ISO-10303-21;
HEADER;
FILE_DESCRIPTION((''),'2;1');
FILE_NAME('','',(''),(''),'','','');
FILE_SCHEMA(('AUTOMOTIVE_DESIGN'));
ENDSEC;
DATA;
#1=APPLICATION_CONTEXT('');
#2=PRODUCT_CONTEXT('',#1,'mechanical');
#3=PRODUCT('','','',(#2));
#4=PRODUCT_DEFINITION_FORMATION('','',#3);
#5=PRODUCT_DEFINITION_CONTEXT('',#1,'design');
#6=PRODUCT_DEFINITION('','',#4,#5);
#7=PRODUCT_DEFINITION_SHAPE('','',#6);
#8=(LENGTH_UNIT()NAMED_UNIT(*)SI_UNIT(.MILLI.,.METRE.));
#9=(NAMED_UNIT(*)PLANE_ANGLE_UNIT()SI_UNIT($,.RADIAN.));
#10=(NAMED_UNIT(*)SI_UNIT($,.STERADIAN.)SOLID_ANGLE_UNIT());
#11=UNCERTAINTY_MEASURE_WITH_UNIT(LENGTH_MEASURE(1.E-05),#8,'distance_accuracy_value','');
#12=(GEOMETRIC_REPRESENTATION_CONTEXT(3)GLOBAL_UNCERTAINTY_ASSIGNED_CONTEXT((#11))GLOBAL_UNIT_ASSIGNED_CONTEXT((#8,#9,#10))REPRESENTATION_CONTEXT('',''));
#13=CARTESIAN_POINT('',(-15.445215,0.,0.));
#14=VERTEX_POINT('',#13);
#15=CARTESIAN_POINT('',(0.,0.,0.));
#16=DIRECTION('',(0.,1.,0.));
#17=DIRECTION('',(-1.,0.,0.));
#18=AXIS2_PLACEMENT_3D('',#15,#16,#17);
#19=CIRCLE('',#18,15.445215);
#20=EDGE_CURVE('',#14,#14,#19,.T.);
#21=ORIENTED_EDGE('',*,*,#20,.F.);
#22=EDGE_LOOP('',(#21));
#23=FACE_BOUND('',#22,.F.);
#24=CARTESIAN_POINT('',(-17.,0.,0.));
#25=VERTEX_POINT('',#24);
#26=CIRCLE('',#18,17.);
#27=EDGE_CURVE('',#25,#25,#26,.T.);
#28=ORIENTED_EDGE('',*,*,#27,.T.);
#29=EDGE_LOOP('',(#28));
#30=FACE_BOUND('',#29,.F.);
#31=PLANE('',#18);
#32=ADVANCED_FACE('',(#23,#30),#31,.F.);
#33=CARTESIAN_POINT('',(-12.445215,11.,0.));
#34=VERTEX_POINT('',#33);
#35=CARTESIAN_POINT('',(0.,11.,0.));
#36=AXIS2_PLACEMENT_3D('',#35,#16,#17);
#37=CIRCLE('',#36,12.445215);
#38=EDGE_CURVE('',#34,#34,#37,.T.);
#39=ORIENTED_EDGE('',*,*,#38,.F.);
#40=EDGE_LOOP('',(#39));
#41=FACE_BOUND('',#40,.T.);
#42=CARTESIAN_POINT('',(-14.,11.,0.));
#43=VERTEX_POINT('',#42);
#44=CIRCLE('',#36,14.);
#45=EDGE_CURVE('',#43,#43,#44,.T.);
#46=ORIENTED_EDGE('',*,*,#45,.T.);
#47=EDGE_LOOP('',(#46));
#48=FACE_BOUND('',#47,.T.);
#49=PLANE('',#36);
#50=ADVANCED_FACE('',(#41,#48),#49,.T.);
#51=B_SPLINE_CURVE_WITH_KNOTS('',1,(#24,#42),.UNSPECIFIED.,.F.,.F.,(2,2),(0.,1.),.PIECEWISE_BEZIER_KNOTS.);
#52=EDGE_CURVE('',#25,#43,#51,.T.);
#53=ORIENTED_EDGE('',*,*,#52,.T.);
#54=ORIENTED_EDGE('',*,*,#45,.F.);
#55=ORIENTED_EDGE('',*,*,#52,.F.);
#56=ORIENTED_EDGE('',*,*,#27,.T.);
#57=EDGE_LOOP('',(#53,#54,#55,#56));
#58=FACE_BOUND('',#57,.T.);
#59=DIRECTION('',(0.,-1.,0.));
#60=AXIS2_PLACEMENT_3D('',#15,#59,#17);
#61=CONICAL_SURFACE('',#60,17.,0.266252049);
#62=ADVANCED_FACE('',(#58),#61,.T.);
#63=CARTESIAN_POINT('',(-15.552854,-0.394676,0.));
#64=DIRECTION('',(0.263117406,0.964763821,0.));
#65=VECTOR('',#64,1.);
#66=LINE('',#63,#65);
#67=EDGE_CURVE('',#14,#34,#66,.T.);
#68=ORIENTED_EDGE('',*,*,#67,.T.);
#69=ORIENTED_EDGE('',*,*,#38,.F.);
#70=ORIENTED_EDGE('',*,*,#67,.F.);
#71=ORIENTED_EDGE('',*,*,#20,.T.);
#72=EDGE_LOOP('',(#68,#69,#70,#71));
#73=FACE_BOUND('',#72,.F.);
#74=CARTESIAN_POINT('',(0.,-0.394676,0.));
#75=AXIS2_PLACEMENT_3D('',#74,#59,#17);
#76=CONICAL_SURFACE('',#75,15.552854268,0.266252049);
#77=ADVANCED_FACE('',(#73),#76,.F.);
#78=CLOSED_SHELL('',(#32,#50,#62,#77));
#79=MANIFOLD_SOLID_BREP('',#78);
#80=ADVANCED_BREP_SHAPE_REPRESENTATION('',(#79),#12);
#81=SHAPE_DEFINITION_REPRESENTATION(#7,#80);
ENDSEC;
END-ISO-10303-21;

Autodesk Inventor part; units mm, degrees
ref_plane "YZ Plane" through (0, 0, 0) normal (1, 0, 0) x (0, 1, 0)
ref_plane "XY Plane" through (0, 0, 0) normal (0, 0, 1) x (1, 0, 0)
sketch "Szkic6" plane through (0, 0, 0) normal (0, 1, 0) x (-1, 0, 0)
  circle A0 centre (0, 0) radius 17
  dimension "d33" = 34
ref_plane "Płaszczyzna konstrukcyjna1" through (0, 11, 0) normal (0, 1, 0) x (-1, 0, 0)
sketch "Szkic7" plane through (0, 11, 0) normal (0, 1, 0) x (-1, 0, 0)
  circle A0 centre (0, 0) radius 14
  dimension "d35" = 28
loft "Wyciągnięcie złożone1" add profiles "Szkic6", "Szkic7"
shell "Skorupa1" thickness 1.5 removed faces 2 at (-0.5625, 11, 1.5565) at (6.0401, 0, -5.7878)
equation "\"d33\" = OD1"
equation "\"d35\" = OD2"
equation "\"d52\" = THK"
equation "\"SzerokośćGięciaPodcięcia\" = Grubość"
equation "\"RozmiarPodcięciaNarożnika\" = 4 * Grubość"
equation "\"PromieńPrzejścia\" = PromieńGięcia"
equation "\"Rozmiar_promienia_Jacobiego\" = PromieńGięcia"
equation "\"Wielk_odstępu\" = Grubość"
equation "\"d2\" = PromieńGięcia"
equation "\"d23\" = PromieńGięcia"
equation "\"OD1\" = 34"
equation "\"OD2\" = 28"
equation "\"L\" = 11"
equation "\"THK\" = 1.5"
equation "\"d34\" = L"
equation "\"Grubość\" = 1.5"
equation "\"PromieńGięcia\" = 3"
properties part number "Redukcja symetryczna Ø34x28x1,5 L=11" material "304"
